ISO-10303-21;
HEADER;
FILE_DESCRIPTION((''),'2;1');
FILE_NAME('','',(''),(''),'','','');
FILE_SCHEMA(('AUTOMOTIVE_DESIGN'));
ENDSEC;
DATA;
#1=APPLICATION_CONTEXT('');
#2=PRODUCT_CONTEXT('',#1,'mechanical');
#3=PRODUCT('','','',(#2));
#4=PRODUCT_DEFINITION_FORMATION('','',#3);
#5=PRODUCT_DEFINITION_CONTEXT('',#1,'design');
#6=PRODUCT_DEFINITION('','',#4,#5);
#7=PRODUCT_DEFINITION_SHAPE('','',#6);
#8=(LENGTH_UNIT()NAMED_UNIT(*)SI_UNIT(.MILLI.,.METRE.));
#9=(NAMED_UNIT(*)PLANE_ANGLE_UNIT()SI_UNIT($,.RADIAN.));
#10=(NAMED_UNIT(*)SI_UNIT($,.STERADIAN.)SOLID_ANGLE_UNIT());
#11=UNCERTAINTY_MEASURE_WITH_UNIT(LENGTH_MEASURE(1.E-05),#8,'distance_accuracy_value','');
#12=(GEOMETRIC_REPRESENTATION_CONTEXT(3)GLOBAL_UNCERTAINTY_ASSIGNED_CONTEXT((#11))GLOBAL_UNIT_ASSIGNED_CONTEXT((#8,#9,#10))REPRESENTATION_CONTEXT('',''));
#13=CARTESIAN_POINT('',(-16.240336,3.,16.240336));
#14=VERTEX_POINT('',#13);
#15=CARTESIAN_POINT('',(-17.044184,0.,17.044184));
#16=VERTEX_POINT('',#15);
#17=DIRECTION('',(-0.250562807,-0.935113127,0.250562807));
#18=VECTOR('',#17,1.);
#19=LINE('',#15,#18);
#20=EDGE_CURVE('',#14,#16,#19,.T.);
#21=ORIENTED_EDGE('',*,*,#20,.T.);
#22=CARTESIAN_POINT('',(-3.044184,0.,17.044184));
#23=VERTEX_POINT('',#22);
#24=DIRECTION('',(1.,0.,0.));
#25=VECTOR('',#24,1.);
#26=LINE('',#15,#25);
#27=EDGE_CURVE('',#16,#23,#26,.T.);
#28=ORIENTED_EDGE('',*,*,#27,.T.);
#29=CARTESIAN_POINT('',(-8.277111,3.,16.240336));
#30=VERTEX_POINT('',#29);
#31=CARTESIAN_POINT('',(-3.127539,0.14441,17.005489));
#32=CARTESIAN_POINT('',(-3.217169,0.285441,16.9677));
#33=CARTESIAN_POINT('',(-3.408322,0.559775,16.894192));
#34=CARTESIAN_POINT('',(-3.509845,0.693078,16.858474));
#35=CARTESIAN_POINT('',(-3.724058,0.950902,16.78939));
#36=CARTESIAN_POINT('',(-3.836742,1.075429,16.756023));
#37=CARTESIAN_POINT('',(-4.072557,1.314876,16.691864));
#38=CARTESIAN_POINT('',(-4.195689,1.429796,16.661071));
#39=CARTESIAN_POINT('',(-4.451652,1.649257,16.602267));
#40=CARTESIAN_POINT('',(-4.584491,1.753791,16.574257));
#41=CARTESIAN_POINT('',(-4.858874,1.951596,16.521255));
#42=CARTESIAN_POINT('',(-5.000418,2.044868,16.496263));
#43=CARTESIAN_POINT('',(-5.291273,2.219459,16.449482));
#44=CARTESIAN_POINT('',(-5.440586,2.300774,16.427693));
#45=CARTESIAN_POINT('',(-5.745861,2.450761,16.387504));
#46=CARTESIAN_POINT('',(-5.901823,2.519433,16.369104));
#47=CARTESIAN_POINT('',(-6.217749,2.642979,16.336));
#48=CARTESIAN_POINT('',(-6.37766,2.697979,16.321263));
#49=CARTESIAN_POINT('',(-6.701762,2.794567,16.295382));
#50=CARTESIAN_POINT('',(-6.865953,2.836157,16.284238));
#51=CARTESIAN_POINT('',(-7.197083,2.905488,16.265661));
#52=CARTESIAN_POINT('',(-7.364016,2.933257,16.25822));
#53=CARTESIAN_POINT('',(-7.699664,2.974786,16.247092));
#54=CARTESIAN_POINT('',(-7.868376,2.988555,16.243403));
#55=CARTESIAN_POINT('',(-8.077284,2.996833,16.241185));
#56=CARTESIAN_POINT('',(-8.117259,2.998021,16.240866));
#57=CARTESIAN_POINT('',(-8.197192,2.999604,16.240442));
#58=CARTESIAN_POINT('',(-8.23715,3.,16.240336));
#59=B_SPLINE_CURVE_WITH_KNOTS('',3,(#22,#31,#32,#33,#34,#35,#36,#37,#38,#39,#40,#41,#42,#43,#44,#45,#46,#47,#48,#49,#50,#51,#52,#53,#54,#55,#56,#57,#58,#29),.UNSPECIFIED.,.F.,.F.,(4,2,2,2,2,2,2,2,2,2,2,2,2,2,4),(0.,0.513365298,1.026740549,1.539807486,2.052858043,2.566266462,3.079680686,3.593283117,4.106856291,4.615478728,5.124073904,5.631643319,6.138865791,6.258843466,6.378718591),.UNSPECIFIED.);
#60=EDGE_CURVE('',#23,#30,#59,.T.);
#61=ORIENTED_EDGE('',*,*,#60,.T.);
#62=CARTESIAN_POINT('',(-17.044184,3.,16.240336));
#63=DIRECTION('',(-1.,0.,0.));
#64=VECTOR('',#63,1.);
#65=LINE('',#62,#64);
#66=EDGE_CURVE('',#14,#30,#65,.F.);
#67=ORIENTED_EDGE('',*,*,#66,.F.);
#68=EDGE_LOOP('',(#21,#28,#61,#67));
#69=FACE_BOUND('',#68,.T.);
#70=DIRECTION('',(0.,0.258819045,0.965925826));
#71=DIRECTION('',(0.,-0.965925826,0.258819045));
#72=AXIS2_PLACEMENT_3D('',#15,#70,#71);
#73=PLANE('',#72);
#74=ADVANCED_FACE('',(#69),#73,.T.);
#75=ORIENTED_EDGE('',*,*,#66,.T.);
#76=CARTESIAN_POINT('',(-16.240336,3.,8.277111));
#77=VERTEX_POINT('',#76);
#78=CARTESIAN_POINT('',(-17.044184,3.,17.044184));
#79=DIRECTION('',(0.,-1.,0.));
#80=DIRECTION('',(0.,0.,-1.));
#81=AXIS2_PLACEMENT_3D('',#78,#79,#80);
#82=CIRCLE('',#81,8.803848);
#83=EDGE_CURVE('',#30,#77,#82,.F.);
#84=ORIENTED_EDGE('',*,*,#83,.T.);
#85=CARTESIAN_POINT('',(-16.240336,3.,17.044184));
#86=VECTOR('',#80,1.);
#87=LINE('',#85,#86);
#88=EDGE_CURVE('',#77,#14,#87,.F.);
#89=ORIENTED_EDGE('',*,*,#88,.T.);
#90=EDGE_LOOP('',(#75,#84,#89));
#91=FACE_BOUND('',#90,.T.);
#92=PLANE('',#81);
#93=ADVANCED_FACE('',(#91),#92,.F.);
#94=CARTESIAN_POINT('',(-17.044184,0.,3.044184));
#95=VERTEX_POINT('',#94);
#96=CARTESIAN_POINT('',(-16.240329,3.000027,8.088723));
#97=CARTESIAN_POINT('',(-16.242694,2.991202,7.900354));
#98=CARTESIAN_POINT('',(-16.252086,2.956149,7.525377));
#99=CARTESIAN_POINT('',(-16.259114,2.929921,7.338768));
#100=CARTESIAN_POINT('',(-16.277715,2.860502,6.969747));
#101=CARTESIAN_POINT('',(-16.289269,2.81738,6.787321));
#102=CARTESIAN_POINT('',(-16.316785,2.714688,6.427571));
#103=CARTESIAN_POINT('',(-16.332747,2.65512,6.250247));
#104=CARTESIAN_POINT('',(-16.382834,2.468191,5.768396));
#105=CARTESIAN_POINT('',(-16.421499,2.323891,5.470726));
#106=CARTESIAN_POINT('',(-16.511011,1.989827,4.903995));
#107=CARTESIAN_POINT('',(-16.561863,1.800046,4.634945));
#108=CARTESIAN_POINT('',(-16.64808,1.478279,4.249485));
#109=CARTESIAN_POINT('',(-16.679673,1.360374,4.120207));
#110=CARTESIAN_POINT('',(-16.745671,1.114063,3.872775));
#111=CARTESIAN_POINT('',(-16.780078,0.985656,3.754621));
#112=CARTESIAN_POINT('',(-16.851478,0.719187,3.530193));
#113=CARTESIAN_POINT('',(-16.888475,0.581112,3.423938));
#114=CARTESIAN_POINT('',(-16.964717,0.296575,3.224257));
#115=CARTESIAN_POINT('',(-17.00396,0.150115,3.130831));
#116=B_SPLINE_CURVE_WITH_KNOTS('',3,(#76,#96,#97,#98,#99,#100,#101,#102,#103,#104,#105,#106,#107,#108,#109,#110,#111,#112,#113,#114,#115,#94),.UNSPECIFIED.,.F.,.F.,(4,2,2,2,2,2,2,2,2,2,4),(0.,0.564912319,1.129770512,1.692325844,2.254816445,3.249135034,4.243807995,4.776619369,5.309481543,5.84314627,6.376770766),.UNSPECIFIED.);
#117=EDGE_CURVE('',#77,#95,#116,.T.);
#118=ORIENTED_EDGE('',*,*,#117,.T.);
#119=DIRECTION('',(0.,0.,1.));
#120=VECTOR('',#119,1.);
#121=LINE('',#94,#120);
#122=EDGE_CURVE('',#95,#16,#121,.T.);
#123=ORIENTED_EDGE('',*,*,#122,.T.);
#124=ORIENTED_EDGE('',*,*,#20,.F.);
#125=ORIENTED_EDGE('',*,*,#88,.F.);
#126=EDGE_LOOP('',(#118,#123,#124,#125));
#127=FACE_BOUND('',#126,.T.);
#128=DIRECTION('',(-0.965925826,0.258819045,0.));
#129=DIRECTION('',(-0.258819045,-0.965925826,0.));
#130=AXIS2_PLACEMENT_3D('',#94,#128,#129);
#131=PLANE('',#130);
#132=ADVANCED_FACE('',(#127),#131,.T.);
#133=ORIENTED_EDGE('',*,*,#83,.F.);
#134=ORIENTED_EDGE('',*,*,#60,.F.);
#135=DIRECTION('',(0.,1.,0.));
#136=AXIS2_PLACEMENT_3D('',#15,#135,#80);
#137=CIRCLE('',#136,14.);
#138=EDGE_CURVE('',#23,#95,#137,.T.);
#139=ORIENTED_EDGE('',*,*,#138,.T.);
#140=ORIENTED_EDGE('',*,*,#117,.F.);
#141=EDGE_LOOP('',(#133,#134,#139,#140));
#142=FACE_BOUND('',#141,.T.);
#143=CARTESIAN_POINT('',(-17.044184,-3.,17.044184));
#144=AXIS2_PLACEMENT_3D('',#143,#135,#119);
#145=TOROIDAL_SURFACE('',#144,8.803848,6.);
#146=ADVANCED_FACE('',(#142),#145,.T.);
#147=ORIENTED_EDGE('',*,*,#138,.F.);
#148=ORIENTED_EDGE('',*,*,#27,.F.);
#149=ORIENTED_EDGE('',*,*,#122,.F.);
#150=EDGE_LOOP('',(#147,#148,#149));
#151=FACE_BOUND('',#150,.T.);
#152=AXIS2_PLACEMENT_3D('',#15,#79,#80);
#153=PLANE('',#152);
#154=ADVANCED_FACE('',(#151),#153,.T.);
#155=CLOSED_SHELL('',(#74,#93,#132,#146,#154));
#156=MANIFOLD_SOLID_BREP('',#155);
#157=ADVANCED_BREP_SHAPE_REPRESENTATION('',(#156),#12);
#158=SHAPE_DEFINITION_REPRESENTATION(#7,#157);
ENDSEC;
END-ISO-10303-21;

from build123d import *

# Parameters (mm, degrees)
BOSS_EXTRUDE1_DEPTH = 3
BOSS_EXTRUDE1_DRAFT = 15
FILLET1_R           = 6


with BuildPart() as part:
    # Sketch2 → Boss-Extrude1 (with draft: the straight prism first)
    with BuildSketch(Plane(origin=(0, 0, 0), x_dir=(1, 0, 0), z_dir=(0, 1, 0))):
        with BuildLine():
            Line((-17.044183736, -3.044183736), (-17.044183736, -17.044183736))
            Line((-17.044183736, -17.044183736), (-3.044183736, -17.044183736))
            ThreePointArc((-3.044183736, -17.044183736), (-7.144688799, -7.144688799), (-17.044183736, -3.044183736))
        make_face()
    extrude(amount=BOSS_EXTRUDE1_DEPTH)
    # Boss-Extrude1: the draft: its side faces are tilted about the plane it starts from
    boss_extrude1_sides = [part.faces().sort_by_distance(p)[0] for p in [
        (-17.044183736, 1.5, 10.044183736),
        (-10.044183736, 1.5, 17.044183736),
        (-7.144688799, 1.5, 7.144688799),
    ]]
    draft(boss_extrude1_sides, Plane(origin=(0, 0, 0), x_dir=(1, 0, 0), z_dir=(0, 1, 0)), BOSS_EXTRUDE1_DRAFT)

    # Fillet1
    # the kernel refuses this fillet: 6 mm, written as the material it takes off along each edge
    with BuildSketch(Plane(origin=(-17.044183736, 3, 17.044183736), x_dir=(0.7169006465944143, 0, 0.6971753458868941), z_dir=(-0.6971753458868941, 0, 0.7169006465944143))) as fillet1_piece_1:
        with BuildLine():
            CenterArc((8.803847577, -6), FILLET1_R, 30, 60)
            Line((8.803847577, 0), (8.803847577, 0.12))
            Line((8.803847577, 0.12), (13.196152423, 0.12))
            Line((13.196152423, 0.12), (13.312063522, 0.031058285))
            ThreePointArc((13.312063522, 0.031058285), (13.713987311, -1.468941715), (14.103923048, -2.94))
            Line((14.103923048, -2.94), (14, -3))
        make_face()
    revolve(axis=Axis((-17.044183736, 3, 17.044183736), (0, 1, 0)), revolution_arc=178.401637266, mode=Mode.SUBTRACT)


solid = part.part
